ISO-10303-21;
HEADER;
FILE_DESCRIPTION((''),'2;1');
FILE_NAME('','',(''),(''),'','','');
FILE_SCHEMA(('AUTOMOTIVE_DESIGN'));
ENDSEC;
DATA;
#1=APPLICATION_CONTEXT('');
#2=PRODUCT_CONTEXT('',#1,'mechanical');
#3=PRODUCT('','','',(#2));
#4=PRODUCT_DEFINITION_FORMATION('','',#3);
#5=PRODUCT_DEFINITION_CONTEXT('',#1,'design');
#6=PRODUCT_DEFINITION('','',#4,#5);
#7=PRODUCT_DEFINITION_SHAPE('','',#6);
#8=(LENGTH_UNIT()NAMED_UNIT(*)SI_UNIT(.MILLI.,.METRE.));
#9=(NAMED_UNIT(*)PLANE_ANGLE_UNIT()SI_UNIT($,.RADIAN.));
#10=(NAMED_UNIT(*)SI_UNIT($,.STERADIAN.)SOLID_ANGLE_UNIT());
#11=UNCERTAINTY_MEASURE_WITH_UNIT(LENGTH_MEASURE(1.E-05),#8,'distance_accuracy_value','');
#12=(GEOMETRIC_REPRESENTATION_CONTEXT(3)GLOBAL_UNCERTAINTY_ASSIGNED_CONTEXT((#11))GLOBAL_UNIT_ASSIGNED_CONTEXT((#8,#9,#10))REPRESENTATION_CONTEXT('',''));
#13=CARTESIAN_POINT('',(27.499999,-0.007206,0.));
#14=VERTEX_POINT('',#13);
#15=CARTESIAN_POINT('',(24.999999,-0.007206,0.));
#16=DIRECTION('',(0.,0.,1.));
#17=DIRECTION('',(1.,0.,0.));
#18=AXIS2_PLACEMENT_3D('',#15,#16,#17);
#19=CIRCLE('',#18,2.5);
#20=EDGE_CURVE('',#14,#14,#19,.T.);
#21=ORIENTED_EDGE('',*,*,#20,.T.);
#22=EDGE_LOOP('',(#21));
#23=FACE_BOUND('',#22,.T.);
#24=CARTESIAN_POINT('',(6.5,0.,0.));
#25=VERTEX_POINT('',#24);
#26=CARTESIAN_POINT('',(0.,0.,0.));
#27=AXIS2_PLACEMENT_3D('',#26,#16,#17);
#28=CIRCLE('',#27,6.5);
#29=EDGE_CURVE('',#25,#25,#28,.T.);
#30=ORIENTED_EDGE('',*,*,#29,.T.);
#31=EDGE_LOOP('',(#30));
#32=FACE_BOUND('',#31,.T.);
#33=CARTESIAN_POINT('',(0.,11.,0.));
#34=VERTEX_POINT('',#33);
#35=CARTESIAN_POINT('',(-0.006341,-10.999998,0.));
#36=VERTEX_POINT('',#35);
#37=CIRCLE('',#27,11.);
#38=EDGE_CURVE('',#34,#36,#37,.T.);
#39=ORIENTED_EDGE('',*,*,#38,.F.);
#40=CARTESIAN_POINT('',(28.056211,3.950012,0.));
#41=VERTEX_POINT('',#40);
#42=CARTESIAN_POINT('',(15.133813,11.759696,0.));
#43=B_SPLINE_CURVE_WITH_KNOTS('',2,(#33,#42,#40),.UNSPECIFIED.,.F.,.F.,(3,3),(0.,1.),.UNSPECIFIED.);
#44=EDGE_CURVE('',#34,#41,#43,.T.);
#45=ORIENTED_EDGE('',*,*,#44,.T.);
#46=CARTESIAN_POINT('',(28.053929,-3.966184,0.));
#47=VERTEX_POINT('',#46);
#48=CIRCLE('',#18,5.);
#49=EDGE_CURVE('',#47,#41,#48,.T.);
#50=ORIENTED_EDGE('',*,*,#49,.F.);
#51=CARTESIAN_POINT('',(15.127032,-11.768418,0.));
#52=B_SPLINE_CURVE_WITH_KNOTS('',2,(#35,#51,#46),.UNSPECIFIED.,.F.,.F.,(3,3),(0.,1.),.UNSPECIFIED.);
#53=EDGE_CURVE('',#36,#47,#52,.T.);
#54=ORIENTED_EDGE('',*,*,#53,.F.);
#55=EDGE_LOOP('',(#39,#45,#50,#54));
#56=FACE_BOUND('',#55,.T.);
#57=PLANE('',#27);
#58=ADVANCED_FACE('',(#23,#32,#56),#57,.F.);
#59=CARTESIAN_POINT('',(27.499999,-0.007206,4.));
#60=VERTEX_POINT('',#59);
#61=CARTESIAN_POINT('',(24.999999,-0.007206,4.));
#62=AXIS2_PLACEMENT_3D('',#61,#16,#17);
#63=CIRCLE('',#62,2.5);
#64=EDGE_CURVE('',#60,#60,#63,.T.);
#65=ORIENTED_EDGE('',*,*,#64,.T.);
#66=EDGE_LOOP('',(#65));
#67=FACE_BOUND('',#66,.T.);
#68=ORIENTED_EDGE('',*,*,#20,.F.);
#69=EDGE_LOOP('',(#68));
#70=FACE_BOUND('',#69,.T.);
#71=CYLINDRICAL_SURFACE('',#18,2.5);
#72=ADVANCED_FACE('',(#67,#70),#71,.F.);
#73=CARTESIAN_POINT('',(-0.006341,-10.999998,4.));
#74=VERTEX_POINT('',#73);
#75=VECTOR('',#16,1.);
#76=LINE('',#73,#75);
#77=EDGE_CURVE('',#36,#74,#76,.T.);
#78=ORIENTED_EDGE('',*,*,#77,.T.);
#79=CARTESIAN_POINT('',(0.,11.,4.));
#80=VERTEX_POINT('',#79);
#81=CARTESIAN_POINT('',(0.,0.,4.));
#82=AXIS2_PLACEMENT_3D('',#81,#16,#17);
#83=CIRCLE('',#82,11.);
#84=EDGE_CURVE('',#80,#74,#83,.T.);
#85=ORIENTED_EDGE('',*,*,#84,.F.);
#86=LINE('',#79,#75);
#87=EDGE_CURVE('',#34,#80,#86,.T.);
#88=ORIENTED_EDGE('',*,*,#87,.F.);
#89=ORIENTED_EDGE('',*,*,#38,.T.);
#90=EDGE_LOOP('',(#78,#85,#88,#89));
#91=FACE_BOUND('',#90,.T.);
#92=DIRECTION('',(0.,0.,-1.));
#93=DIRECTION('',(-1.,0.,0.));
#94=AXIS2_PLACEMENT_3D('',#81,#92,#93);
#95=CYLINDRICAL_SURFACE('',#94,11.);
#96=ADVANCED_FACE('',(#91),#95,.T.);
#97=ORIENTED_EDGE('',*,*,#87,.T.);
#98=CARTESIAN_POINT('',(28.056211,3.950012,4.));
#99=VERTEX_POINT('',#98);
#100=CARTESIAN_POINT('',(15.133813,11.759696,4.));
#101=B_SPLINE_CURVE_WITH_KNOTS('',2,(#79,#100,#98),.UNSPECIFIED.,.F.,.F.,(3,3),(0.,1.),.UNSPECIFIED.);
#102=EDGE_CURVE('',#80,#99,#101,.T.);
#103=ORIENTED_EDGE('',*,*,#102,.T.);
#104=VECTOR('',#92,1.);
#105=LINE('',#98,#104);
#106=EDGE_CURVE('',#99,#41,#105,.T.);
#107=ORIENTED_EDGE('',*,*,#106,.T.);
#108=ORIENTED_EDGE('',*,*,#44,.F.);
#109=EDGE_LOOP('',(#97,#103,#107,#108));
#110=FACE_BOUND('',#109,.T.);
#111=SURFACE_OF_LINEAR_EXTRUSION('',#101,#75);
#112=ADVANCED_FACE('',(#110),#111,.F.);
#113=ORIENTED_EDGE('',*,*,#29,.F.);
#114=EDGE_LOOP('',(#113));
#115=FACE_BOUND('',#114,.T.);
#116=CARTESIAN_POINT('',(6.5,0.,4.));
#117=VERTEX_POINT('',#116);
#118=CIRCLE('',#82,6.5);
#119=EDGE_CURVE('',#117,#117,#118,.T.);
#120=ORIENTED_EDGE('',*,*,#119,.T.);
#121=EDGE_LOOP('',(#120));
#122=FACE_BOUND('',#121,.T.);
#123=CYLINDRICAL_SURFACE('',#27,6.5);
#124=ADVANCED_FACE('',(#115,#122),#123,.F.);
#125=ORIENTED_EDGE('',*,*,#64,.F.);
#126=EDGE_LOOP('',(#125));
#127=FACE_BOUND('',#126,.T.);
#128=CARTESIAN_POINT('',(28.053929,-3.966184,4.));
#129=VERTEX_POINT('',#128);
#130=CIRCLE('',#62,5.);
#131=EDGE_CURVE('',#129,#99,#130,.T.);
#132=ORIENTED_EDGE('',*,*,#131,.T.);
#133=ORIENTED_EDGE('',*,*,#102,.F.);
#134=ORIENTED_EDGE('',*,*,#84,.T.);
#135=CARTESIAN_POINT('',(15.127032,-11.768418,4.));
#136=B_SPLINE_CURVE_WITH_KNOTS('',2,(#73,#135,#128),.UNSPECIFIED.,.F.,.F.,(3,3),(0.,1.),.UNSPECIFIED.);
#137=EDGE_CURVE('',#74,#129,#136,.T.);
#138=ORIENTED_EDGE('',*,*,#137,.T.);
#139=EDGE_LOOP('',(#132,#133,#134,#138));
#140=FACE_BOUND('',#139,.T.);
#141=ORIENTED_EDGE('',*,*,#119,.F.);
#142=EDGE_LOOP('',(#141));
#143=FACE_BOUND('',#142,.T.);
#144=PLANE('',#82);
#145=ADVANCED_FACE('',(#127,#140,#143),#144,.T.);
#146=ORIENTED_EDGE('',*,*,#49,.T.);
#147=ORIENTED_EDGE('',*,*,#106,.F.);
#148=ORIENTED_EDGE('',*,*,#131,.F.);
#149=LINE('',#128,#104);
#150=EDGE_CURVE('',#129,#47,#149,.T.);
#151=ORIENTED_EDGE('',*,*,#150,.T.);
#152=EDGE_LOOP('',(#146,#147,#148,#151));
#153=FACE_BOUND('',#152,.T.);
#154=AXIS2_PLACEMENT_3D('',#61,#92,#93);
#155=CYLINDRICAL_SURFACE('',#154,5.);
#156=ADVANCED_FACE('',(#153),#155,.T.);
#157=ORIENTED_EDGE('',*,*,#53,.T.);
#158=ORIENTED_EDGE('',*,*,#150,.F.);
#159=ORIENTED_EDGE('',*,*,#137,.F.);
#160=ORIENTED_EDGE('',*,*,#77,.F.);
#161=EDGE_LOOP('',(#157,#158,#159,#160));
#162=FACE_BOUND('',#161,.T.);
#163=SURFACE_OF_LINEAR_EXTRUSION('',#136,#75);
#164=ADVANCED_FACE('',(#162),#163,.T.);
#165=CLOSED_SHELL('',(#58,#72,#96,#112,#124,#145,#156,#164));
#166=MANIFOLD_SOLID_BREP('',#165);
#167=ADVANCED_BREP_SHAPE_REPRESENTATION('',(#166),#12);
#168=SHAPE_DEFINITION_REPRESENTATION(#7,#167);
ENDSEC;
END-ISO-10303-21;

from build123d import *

# Parameters (mm, degrees)
ESQUISSE1_R             = 11
BOSS_EXTRU_2_DEPTH      = 4
BOSS_EXTRU_3_DEPTH      = 4
ESQUISSE6_R             = 6.5
ENL_V_MAT_EXTRU_1_DEPTH = 4
ESQUISSE7_R             = 2.5
ENL_V_MAT_EXTRU_2_DEPTH = 4
EPAISSIR3_DEPTH         = 4


# Read off the part's stored shape, not the designer's step: Boss.-Extru.3, Epaissir3
with BuildPart() as part:
    # Esquisse1 → Boss.-Extru.2 (new body)
    with BuildSketch(Plane.XY):
        Circle(ESQUISSE1_R)
    extrude(amount=BOSS_EXTRU_2_DEPTH)

    # Esquisse6 → Enlèv. mat.-Extru.1 (cut)
    with BuildSketch(Plane.XY.offset(4)):
        Circle(ESQUISSE6_R)
    extrude(amount=-ENL_V_MAT_EXTRU_1_DEPTH, mode=Mode.SUBTRACT)



with BuildPart() as body_2:
    # Boss.-Extru.3 outline → Boss.-Extru.3 (new body)
    with BuildSketch(Plane.XY):
        with BuildLine():
            ThreePointArc((26.975217648, 4.586105757), (19.99999917, -0.005763433), (26.972567207, -4.601656213))
            add(Edge.make_bspline(
                [(26.972567207, -4.601656213), (27.515164642, -4.291363801), (28.053929341, -3.966183827)],
                knots=[0.958322196, 0.958322196, 0.958322196, 1, 1, 1], degree=2))
            ThreePointArc((28.053929341, -3.966183827), (29.999998754, -0.008646725), (28.056210795, 3.95001155))
            add(Edge.make_bspline(
                [(26.975217648, 4.586105757), (27.517634871, 4.275501294), (28.056210795, 3.95001155)],
                knots=[0.958322291, 0.958322291, 0.958322291, 1, 1, 1], degree=2))
        make_face()
    extrude(amount=BOSS_EXTRU_3_DEPTH)

    # Esquisse7 → Enlèv. mat.-Extru.2 (cut)
    with BuildSketch(Plane.XY.offset(4)):
        with Locations((24.999998962, -0.007205809)):
            Circle(ESQUISSE7_R)
    extrude(amount=-ENL_V_MAT_EXTRU_2_DEPTH, mode=Mode.SUBTRACT)


with BuildPart() as part_1:
    add(part.part)

    add(body_2.part)  # Epaissir3 merges body 2
    # Epaissir3 outline → Epaissir3 (add)
    with BuildSketch(Plane.XY):
        with BuildLine():
            add(Edge.make_bspline(
                [(0, 11), (14.503070624, 11.728033327), (26.975217648, 4.586105757)],
                knots=[0, 0, 0, 0.958322291, 0.958322291, 0.958322291], degree=2))
            ThreePointArc((0, 11), (10.999999543, -0.003170596), (-0.006341192, -10.999998172))
            add(Edge.make_bspline(
                [(-0.006341192, -10.999998172), (14.496306132, -11.736391644), (26.972567207, -4.601656213)],
                knots=[0, 0, 0, 0.958322196, 0.958322196, 0.958322196], degree=2))
            ThreePointArc((26.972567207, -4.601656213), (19.99999917, -0.005763433), (26.975217648, 4.586105757))
        make_face()
    extrude(amount=EPAISSIR3_DEPTH)


solid = part_1.part
